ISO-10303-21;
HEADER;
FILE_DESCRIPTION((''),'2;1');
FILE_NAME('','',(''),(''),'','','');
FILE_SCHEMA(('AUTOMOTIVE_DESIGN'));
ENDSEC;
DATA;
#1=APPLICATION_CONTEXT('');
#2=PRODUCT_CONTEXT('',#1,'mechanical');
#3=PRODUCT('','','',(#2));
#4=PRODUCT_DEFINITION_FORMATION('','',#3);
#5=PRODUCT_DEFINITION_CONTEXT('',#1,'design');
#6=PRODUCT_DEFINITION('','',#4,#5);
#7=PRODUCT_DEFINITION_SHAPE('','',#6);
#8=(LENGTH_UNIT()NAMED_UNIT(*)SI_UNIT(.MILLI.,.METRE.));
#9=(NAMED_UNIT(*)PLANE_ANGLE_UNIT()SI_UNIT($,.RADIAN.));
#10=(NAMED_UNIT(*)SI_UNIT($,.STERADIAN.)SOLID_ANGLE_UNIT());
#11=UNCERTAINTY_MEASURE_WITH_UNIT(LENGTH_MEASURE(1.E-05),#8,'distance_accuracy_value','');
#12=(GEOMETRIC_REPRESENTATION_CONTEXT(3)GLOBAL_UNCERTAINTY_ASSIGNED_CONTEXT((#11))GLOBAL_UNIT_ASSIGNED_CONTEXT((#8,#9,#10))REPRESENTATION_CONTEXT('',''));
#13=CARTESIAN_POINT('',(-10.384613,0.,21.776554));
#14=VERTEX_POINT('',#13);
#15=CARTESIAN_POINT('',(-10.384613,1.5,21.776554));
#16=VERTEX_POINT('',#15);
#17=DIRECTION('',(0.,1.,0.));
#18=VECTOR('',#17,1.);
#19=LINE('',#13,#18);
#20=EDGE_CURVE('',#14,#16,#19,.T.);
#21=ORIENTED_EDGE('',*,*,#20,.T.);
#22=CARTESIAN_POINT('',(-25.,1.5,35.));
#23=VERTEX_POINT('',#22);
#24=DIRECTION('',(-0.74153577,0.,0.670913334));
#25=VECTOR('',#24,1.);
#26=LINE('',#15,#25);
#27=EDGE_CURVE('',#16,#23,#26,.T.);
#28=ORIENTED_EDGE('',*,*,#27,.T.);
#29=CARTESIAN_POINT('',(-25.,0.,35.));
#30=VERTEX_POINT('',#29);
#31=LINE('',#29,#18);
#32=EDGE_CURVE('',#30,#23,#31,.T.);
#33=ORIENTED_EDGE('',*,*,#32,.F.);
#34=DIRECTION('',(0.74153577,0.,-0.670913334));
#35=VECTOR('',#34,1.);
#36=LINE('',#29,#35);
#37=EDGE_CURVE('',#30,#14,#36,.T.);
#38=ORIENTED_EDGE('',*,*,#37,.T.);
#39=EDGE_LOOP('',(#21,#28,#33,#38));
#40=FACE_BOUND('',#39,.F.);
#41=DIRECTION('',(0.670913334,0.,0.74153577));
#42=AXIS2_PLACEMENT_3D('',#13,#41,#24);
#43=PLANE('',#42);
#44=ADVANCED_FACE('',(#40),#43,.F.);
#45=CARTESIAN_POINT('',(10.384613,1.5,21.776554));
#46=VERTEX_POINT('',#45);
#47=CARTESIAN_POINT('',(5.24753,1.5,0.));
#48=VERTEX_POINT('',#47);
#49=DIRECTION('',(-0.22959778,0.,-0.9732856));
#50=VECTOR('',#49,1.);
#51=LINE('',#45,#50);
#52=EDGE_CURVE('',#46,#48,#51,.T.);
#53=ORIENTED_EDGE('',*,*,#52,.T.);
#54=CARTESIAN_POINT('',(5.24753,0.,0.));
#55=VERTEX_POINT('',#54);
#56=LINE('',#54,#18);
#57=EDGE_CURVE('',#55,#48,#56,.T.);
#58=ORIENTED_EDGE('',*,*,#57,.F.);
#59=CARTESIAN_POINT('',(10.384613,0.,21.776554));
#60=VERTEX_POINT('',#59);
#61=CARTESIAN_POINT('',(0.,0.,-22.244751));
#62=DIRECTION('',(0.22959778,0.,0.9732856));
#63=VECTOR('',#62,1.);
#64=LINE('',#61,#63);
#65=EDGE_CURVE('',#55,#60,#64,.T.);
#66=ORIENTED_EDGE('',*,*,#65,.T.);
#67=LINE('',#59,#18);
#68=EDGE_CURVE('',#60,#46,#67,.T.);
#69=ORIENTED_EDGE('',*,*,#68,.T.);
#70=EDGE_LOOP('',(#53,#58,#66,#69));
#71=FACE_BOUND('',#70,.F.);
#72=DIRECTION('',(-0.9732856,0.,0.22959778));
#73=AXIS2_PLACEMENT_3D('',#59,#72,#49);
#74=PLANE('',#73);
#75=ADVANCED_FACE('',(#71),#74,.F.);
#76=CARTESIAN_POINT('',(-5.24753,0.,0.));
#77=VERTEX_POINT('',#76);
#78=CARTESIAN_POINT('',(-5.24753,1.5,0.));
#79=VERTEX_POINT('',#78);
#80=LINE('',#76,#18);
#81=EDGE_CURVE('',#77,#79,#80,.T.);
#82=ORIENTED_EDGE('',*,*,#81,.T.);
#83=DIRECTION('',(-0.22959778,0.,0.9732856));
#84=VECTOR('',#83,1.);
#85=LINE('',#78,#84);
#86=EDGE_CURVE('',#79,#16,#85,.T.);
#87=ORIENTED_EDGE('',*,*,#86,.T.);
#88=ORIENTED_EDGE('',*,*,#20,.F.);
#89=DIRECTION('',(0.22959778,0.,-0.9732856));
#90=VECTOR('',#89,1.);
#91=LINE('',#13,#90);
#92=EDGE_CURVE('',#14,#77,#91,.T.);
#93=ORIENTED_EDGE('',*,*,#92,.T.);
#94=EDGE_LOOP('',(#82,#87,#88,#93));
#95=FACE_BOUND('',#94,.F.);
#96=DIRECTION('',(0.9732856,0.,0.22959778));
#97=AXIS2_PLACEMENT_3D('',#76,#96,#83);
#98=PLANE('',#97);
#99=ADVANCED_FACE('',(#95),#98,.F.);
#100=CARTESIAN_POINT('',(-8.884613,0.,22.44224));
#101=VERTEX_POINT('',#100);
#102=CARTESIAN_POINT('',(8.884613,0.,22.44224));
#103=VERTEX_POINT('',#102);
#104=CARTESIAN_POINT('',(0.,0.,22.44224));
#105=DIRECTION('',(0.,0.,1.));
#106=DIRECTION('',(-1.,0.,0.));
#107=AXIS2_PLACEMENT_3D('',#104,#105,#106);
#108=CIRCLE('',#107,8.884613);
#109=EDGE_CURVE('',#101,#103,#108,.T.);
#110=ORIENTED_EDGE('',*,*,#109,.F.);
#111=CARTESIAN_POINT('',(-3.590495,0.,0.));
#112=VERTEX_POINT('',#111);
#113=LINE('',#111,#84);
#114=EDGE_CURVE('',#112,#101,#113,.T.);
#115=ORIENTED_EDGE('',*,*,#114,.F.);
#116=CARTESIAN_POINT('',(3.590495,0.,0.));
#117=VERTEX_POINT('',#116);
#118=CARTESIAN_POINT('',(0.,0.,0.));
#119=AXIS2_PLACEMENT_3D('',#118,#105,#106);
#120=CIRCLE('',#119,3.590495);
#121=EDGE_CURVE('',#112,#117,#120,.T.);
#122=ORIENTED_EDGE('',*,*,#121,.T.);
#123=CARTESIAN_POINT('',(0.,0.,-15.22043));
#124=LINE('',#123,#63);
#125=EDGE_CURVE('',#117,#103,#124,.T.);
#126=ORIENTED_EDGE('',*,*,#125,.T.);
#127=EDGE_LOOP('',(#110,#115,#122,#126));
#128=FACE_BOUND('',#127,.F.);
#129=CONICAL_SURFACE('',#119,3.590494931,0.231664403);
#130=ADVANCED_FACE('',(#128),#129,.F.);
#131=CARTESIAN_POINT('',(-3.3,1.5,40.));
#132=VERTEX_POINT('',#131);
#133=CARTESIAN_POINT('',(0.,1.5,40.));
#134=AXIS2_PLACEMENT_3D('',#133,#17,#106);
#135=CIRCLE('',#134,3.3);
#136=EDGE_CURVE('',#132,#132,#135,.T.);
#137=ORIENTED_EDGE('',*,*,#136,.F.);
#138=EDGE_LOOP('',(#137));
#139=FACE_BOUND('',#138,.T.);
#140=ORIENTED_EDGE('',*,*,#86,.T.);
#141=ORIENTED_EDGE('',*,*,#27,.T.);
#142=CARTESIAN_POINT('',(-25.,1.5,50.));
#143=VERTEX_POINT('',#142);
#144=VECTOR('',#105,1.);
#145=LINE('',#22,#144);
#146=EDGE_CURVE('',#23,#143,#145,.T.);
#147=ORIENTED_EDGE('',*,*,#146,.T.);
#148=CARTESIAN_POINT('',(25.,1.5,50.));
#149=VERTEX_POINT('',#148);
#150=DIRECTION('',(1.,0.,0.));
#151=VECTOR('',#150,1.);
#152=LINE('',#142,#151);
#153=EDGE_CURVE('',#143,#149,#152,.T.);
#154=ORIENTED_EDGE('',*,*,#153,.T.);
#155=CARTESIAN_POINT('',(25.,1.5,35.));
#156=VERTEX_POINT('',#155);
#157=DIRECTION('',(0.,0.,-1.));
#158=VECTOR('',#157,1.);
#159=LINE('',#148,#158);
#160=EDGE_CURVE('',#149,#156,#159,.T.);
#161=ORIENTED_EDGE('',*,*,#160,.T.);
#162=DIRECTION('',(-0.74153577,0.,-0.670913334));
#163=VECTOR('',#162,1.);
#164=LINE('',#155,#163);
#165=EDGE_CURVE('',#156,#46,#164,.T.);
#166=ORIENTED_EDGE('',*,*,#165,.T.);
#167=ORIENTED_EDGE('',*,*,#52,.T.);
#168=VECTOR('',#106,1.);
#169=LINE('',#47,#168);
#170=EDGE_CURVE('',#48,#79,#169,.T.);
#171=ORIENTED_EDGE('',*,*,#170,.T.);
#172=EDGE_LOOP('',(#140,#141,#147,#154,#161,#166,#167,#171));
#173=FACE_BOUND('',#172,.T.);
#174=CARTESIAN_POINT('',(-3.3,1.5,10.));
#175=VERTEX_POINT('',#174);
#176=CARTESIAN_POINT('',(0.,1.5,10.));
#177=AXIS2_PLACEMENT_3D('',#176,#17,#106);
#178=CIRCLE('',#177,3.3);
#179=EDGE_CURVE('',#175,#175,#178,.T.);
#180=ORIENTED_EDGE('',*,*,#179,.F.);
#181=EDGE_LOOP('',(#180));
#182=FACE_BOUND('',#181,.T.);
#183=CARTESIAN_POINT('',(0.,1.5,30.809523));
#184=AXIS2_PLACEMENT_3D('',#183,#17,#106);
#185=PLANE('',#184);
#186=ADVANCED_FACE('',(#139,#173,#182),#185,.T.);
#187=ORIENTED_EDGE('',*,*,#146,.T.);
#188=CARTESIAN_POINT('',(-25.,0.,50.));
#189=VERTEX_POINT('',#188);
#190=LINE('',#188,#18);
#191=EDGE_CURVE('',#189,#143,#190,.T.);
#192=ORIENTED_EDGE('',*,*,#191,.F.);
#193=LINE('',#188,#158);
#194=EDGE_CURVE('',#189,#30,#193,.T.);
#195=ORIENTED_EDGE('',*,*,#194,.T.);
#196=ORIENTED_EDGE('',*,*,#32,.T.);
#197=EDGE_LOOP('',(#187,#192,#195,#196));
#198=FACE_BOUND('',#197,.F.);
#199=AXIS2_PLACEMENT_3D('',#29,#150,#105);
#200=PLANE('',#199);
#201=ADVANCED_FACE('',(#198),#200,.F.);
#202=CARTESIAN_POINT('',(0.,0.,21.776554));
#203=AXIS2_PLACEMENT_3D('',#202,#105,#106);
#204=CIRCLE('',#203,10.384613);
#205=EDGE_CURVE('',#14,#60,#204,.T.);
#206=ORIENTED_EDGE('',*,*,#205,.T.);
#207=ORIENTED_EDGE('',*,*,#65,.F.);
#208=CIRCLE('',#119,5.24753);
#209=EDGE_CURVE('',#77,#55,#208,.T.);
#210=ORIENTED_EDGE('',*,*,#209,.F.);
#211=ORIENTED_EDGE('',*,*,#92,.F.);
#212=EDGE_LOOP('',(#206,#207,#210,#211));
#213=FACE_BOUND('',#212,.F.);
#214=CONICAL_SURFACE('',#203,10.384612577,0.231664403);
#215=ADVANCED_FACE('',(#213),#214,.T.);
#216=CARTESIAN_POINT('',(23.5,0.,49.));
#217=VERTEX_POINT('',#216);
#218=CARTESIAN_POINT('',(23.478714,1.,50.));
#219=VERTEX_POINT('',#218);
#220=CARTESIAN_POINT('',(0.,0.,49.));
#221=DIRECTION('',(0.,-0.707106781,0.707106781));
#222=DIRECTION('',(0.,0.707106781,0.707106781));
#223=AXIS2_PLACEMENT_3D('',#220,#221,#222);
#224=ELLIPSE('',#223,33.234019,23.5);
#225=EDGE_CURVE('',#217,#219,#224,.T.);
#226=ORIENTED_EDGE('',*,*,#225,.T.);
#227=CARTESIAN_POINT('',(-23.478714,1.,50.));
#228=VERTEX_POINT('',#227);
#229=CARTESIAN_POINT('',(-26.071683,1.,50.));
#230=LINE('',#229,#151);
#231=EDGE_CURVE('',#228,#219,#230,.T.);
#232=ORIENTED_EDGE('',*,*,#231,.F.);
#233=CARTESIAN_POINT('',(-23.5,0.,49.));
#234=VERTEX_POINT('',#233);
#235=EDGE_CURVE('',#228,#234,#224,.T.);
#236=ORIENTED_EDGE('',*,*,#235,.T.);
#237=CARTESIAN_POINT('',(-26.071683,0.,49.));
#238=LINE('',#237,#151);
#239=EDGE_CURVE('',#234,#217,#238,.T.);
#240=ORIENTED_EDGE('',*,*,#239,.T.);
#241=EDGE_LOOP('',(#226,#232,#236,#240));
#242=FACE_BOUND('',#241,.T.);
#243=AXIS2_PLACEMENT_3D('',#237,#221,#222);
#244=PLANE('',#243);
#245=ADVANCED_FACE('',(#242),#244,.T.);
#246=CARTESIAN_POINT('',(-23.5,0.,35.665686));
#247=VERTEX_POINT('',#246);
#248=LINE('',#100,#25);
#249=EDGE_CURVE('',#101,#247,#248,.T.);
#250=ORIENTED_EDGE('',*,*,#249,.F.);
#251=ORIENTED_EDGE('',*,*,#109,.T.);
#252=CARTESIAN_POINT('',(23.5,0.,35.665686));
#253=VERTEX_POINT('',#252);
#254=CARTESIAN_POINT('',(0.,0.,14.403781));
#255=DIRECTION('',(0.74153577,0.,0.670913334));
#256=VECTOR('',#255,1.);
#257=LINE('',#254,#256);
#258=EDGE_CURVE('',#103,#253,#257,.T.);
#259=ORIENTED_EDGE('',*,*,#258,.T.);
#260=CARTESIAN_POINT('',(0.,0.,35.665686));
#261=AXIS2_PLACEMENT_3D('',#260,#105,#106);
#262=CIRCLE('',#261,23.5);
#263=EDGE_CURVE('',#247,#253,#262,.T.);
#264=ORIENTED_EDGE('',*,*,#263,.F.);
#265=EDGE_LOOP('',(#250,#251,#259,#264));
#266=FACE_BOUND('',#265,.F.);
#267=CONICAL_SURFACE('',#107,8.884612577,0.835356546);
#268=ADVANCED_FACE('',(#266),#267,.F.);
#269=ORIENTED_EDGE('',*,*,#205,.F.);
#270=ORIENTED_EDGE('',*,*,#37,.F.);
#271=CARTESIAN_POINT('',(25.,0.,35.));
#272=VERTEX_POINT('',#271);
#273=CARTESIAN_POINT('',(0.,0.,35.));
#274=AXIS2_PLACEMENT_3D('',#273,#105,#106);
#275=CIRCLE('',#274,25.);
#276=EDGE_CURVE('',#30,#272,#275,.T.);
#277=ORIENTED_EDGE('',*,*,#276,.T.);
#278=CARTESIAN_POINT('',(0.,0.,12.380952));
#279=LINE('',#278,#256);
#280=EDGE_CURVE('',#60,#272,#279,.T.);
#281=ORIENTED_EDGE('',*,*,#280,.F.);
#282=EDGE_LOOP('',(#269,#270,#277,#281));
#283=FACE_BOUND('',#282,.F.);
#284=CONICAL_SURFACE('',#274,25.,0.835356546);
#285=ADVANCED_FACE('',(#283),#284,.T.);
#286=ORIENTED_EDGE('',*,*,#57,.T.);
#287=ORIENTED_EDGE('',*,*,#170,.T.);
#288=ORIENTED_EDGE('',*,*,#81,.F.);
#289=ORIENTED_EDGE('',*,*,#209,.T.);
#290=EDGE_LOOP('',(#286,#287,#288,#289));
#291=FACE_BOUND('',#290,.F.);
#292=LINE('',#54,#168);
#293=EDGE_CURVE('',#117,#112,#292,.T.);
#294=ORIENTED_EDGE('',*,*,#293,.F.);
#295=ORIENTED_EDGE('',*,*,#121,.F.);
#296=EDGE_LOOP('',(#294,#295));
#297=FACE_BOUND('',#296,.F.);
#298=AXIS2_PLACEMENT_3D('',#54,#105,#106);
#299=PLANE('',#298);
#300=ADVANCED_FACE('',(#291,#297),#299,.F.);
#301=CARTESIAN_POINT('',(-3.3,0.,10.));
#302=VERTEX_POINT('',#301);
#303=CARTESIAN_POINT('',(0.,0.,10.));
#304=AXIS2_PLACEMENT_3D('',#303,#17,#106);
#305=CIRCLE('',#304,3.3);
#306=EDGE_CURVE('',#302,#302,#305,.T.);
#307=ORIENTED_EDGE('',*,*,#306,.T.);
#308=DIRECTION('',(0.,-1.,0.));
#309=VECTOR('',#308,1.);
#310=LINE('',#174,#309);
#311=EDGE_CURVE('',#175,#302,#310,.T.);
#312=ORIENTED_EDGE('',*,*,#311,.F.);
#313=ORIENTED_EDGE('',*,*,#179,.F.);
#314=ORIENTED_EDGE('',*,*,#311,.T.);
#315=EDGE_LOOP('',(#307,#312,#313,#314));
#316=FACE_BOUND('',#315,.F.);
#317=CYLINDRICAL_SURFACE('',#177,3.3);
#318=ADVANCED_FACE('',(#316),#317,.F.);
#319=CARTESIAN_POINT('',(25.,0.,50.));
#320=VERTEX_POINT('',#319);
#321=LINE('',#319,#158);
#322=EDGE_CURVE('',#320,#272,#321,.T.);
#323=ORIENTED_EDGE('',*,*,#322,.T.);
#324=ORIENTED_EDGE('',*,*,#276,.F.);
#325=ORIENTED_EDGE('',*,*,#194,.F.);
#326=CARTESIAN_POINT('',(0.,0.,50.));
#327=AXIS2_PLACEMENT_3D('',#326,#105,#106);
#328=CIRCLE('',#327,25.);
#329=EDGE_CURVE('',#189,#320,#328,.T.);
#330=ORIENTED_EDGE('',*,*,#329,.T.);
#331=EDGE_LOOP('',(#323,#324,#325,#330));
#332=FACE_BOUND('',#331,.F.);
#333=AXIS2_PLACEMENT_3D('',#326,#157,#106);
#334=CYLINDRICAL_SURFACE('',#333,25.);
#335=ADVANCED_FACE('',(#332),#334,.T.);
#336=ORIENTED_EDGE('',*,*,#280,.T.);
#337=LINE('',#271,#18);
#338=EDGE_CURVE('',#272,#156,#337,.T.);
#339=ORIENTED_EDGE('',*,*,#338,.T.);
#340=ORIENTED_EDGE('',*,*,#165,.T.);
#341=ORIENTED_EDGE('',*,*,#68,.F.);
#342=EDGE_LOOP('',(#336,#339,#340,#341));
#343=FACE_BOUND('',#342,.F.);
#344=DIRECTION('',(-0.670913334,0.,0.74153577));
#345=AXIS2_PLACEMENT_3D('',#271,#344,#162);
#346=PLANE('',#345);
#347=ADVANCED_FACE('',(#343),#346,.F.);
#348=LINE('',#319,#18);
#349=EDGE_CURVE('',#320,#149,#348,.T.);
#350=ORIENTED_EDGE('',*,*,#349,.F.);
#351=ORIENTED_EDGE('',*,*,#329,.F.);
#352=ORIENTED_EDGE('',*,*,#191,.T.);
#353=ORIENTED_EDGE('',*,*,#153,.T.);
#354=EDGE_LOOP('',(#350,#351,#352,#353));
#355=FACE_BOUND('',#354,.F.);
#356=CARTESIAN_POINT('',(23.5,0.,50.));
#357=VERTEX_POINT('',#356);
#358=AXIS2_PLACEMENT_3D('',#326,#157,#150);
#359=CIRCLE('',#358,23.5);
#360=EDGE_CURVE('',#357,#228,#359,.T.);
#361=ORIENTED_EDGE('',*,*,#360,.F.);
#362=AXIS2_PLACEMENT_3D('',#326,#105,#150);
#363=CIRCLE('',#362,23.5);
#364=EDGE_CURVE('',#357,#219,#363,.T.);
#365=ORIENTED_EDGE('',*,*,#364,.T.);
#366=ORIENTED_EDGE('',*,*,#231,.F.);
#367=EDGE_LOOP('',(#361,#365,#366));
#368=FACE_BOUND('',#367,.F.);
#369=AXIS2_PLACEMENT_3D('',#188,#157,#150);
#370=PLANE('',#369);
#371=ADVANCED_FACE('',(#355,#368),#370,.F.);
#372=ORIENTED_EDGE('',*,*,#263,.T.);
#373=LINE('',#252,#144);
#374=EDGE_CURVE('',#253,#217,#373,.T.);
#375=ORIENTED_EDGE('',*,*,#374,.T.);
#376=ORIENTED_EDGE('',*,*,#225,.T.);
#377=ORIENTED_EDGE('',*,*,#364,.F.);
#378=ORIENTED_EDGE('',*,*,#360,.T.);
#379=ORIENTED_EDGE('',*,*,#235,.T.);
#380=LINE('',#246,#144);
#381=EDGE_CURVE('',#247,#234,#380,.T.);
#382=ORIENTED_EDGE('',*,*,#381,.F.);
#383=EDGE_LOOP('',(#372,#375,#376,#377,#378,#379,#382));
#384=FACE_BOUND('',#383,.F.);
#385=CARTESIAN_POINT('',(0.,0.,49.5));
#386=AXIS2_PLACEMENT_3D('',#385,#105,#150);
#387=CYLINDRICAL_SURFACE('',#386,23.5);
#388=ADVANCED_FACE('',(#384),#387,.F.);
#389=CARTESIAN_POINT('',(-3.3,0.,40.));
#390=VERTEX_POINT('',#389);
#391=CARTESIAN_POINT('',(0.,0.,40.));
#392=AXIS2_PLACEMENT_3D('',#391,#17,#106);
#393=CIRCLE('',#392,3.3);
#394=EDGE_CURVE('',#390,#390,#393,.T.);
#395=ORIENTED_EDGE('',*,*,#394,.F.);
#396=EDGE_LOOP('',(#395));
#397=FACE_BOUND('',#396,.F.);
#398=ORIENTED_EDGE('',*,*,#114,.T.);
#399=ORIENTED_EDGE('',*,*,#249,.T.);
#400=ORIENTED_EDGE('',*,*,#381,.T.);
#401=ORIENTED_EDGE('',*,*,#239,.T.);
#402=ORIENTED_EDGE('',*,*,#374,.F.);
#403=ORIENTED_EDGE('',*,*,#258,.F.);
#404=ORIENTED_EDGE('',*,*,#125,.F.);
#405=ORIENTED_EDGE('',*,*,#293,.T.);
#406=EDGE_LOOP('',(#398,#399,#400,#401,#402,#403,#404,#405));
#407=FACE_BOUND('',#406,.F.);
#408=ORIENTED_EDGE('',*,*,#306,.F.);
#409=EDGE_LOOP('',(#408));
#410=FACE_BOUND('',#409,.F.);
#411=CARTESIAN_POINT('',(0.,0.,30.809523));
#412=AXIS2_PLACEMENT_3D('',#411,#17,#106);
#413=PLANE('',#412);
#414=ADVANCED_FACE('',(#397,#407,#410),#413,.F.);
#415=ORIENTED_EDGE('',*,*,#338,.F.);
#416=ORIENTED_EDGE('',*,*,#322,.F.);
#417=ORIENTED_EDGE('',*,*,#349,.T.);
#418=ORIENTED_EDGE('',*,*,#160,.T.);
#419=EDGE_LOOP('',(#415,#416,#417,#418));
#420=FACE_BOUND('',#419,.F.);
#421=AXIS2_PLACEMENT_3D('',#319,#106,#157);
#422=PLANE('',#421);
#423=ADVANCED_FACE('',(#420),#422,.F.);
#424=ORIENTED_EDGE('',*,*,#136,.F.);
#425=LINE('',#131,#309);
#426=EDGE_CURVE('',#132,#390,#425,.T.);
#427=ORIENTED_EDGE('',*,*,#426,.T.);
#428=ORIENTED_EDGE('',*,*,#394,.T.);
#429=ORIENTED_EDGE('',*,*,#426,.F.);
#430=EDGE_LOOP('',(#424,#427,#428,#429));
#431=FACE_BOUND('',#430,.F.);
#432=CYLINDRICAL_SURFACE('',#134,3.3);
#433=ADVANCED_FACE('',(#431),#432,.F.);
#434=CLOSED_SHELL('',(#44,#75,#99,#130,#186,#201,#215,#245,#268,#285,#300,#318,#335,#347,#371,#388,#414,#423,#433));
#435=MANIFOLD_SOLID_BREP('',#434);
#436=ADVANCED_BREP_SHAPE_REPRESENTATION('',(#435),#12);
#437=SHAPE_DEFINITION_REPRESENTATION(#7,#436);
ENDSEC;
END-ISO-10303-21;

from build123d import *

# Parameters (mm, degrees)
F2_W        = 80.1923088729
F2_H        = 33.5576944053
F3_DEPTH    = 69.4
F5_DEPTH    = 1.5
F6_R        = 3.3
F7_DEPTH    = 3
F8_T4_DEPTH = 52.1433659759
F8_S5_R     = 23.5
F8_T6_DEPTH = 28


# Not quite as in the source:
# - a fillet or chamfer that OpenCascade refuses, or shapes differently, is made with other operations: its cross-section is extruded or revolved along the edge and cut away or added


with BuildPart() as f1:
    # F0 (on Front) → F1 (revolve)
    with BuildSketch(Plane.XZ):
        Polygon((-23.5, 35.6656860253), (-23.5, 48.5), (-23.5, 50), (-25, 50), (-25, 35), (-10.384612577, 21.7765538924), (-5.247530064, 0), (-3.5904949309, 0), (-8.884612577, 22.4422399178), align=None)
    revolve(axis=Axis((0, 0, 32.1634635329), (0, 0, 1)))

    # F2 (on Top) → F3 (cut)
    with BuildSketch(Plane.XY):
        with Locations((8.9423079044, 16.7788472027)):
            Rectangle(F2_W, F2_H)
    extrude(amount=F3_DEPTH, mode=Mode.SUBTRACT)

    # F4 (on face) → F5 (join)
    with BuildSketch(Plane(origin=(0, 0, 0), x_dir=(-1, 0, 0), z_dir=(0, 1, 0))):
        Polygon((25, 50), (-25, 50), (-25, 35), (-10.384612577, 21.7765538924), (-5.247530064, 0), (5.247530064, 0), (10.384612577, 21.7765538924), (25, 35), align=None)
    extrude(amount=F5_DEPTH)

    # F6 (on face) → F7 (cut)
    with BuildSketch(Plane(origin=(0, 1.5, 0), x_dir=(-1, 0, 0), z_dir=(0, 1, 0))):
        with Locations((0, 40)):
            Circle(F6_R)
        with Locations((0, 10)):
            Circle(F6_R)
    extrude(amount=-F7_DEPTH, mode=Mode.SUBTRACT)

    # F8: chamfer of 1 on 1 edges, made by hand


with BuildPart() as f8_tool2:
    # F8_s3 → F8_t4 (new body)
    with BuildSketch(Plane.YZ.offset(-26.071682988)):
        Polygon((0, 49), (1, 50), (0, 50), align=None)
    extrude(amount=F8_T4_DEPTH)

    # F8_s5 → F8_t6 (intersect, symmetric)
    with BuildSketch(Plane.XY.offset(49.5)):
        Circle(F8_S5_R)
    extrude(amount=F8_T6_DEPTH, both=True, mode=Mode.INTERSECT)


with BuildPart() as f1_1:
    add(f1.part)

    # F8_t1: cut F8_tool2
    add(f8_tool2.part, mode=Mode.SUBTRACT)


solid = f1_1.part
